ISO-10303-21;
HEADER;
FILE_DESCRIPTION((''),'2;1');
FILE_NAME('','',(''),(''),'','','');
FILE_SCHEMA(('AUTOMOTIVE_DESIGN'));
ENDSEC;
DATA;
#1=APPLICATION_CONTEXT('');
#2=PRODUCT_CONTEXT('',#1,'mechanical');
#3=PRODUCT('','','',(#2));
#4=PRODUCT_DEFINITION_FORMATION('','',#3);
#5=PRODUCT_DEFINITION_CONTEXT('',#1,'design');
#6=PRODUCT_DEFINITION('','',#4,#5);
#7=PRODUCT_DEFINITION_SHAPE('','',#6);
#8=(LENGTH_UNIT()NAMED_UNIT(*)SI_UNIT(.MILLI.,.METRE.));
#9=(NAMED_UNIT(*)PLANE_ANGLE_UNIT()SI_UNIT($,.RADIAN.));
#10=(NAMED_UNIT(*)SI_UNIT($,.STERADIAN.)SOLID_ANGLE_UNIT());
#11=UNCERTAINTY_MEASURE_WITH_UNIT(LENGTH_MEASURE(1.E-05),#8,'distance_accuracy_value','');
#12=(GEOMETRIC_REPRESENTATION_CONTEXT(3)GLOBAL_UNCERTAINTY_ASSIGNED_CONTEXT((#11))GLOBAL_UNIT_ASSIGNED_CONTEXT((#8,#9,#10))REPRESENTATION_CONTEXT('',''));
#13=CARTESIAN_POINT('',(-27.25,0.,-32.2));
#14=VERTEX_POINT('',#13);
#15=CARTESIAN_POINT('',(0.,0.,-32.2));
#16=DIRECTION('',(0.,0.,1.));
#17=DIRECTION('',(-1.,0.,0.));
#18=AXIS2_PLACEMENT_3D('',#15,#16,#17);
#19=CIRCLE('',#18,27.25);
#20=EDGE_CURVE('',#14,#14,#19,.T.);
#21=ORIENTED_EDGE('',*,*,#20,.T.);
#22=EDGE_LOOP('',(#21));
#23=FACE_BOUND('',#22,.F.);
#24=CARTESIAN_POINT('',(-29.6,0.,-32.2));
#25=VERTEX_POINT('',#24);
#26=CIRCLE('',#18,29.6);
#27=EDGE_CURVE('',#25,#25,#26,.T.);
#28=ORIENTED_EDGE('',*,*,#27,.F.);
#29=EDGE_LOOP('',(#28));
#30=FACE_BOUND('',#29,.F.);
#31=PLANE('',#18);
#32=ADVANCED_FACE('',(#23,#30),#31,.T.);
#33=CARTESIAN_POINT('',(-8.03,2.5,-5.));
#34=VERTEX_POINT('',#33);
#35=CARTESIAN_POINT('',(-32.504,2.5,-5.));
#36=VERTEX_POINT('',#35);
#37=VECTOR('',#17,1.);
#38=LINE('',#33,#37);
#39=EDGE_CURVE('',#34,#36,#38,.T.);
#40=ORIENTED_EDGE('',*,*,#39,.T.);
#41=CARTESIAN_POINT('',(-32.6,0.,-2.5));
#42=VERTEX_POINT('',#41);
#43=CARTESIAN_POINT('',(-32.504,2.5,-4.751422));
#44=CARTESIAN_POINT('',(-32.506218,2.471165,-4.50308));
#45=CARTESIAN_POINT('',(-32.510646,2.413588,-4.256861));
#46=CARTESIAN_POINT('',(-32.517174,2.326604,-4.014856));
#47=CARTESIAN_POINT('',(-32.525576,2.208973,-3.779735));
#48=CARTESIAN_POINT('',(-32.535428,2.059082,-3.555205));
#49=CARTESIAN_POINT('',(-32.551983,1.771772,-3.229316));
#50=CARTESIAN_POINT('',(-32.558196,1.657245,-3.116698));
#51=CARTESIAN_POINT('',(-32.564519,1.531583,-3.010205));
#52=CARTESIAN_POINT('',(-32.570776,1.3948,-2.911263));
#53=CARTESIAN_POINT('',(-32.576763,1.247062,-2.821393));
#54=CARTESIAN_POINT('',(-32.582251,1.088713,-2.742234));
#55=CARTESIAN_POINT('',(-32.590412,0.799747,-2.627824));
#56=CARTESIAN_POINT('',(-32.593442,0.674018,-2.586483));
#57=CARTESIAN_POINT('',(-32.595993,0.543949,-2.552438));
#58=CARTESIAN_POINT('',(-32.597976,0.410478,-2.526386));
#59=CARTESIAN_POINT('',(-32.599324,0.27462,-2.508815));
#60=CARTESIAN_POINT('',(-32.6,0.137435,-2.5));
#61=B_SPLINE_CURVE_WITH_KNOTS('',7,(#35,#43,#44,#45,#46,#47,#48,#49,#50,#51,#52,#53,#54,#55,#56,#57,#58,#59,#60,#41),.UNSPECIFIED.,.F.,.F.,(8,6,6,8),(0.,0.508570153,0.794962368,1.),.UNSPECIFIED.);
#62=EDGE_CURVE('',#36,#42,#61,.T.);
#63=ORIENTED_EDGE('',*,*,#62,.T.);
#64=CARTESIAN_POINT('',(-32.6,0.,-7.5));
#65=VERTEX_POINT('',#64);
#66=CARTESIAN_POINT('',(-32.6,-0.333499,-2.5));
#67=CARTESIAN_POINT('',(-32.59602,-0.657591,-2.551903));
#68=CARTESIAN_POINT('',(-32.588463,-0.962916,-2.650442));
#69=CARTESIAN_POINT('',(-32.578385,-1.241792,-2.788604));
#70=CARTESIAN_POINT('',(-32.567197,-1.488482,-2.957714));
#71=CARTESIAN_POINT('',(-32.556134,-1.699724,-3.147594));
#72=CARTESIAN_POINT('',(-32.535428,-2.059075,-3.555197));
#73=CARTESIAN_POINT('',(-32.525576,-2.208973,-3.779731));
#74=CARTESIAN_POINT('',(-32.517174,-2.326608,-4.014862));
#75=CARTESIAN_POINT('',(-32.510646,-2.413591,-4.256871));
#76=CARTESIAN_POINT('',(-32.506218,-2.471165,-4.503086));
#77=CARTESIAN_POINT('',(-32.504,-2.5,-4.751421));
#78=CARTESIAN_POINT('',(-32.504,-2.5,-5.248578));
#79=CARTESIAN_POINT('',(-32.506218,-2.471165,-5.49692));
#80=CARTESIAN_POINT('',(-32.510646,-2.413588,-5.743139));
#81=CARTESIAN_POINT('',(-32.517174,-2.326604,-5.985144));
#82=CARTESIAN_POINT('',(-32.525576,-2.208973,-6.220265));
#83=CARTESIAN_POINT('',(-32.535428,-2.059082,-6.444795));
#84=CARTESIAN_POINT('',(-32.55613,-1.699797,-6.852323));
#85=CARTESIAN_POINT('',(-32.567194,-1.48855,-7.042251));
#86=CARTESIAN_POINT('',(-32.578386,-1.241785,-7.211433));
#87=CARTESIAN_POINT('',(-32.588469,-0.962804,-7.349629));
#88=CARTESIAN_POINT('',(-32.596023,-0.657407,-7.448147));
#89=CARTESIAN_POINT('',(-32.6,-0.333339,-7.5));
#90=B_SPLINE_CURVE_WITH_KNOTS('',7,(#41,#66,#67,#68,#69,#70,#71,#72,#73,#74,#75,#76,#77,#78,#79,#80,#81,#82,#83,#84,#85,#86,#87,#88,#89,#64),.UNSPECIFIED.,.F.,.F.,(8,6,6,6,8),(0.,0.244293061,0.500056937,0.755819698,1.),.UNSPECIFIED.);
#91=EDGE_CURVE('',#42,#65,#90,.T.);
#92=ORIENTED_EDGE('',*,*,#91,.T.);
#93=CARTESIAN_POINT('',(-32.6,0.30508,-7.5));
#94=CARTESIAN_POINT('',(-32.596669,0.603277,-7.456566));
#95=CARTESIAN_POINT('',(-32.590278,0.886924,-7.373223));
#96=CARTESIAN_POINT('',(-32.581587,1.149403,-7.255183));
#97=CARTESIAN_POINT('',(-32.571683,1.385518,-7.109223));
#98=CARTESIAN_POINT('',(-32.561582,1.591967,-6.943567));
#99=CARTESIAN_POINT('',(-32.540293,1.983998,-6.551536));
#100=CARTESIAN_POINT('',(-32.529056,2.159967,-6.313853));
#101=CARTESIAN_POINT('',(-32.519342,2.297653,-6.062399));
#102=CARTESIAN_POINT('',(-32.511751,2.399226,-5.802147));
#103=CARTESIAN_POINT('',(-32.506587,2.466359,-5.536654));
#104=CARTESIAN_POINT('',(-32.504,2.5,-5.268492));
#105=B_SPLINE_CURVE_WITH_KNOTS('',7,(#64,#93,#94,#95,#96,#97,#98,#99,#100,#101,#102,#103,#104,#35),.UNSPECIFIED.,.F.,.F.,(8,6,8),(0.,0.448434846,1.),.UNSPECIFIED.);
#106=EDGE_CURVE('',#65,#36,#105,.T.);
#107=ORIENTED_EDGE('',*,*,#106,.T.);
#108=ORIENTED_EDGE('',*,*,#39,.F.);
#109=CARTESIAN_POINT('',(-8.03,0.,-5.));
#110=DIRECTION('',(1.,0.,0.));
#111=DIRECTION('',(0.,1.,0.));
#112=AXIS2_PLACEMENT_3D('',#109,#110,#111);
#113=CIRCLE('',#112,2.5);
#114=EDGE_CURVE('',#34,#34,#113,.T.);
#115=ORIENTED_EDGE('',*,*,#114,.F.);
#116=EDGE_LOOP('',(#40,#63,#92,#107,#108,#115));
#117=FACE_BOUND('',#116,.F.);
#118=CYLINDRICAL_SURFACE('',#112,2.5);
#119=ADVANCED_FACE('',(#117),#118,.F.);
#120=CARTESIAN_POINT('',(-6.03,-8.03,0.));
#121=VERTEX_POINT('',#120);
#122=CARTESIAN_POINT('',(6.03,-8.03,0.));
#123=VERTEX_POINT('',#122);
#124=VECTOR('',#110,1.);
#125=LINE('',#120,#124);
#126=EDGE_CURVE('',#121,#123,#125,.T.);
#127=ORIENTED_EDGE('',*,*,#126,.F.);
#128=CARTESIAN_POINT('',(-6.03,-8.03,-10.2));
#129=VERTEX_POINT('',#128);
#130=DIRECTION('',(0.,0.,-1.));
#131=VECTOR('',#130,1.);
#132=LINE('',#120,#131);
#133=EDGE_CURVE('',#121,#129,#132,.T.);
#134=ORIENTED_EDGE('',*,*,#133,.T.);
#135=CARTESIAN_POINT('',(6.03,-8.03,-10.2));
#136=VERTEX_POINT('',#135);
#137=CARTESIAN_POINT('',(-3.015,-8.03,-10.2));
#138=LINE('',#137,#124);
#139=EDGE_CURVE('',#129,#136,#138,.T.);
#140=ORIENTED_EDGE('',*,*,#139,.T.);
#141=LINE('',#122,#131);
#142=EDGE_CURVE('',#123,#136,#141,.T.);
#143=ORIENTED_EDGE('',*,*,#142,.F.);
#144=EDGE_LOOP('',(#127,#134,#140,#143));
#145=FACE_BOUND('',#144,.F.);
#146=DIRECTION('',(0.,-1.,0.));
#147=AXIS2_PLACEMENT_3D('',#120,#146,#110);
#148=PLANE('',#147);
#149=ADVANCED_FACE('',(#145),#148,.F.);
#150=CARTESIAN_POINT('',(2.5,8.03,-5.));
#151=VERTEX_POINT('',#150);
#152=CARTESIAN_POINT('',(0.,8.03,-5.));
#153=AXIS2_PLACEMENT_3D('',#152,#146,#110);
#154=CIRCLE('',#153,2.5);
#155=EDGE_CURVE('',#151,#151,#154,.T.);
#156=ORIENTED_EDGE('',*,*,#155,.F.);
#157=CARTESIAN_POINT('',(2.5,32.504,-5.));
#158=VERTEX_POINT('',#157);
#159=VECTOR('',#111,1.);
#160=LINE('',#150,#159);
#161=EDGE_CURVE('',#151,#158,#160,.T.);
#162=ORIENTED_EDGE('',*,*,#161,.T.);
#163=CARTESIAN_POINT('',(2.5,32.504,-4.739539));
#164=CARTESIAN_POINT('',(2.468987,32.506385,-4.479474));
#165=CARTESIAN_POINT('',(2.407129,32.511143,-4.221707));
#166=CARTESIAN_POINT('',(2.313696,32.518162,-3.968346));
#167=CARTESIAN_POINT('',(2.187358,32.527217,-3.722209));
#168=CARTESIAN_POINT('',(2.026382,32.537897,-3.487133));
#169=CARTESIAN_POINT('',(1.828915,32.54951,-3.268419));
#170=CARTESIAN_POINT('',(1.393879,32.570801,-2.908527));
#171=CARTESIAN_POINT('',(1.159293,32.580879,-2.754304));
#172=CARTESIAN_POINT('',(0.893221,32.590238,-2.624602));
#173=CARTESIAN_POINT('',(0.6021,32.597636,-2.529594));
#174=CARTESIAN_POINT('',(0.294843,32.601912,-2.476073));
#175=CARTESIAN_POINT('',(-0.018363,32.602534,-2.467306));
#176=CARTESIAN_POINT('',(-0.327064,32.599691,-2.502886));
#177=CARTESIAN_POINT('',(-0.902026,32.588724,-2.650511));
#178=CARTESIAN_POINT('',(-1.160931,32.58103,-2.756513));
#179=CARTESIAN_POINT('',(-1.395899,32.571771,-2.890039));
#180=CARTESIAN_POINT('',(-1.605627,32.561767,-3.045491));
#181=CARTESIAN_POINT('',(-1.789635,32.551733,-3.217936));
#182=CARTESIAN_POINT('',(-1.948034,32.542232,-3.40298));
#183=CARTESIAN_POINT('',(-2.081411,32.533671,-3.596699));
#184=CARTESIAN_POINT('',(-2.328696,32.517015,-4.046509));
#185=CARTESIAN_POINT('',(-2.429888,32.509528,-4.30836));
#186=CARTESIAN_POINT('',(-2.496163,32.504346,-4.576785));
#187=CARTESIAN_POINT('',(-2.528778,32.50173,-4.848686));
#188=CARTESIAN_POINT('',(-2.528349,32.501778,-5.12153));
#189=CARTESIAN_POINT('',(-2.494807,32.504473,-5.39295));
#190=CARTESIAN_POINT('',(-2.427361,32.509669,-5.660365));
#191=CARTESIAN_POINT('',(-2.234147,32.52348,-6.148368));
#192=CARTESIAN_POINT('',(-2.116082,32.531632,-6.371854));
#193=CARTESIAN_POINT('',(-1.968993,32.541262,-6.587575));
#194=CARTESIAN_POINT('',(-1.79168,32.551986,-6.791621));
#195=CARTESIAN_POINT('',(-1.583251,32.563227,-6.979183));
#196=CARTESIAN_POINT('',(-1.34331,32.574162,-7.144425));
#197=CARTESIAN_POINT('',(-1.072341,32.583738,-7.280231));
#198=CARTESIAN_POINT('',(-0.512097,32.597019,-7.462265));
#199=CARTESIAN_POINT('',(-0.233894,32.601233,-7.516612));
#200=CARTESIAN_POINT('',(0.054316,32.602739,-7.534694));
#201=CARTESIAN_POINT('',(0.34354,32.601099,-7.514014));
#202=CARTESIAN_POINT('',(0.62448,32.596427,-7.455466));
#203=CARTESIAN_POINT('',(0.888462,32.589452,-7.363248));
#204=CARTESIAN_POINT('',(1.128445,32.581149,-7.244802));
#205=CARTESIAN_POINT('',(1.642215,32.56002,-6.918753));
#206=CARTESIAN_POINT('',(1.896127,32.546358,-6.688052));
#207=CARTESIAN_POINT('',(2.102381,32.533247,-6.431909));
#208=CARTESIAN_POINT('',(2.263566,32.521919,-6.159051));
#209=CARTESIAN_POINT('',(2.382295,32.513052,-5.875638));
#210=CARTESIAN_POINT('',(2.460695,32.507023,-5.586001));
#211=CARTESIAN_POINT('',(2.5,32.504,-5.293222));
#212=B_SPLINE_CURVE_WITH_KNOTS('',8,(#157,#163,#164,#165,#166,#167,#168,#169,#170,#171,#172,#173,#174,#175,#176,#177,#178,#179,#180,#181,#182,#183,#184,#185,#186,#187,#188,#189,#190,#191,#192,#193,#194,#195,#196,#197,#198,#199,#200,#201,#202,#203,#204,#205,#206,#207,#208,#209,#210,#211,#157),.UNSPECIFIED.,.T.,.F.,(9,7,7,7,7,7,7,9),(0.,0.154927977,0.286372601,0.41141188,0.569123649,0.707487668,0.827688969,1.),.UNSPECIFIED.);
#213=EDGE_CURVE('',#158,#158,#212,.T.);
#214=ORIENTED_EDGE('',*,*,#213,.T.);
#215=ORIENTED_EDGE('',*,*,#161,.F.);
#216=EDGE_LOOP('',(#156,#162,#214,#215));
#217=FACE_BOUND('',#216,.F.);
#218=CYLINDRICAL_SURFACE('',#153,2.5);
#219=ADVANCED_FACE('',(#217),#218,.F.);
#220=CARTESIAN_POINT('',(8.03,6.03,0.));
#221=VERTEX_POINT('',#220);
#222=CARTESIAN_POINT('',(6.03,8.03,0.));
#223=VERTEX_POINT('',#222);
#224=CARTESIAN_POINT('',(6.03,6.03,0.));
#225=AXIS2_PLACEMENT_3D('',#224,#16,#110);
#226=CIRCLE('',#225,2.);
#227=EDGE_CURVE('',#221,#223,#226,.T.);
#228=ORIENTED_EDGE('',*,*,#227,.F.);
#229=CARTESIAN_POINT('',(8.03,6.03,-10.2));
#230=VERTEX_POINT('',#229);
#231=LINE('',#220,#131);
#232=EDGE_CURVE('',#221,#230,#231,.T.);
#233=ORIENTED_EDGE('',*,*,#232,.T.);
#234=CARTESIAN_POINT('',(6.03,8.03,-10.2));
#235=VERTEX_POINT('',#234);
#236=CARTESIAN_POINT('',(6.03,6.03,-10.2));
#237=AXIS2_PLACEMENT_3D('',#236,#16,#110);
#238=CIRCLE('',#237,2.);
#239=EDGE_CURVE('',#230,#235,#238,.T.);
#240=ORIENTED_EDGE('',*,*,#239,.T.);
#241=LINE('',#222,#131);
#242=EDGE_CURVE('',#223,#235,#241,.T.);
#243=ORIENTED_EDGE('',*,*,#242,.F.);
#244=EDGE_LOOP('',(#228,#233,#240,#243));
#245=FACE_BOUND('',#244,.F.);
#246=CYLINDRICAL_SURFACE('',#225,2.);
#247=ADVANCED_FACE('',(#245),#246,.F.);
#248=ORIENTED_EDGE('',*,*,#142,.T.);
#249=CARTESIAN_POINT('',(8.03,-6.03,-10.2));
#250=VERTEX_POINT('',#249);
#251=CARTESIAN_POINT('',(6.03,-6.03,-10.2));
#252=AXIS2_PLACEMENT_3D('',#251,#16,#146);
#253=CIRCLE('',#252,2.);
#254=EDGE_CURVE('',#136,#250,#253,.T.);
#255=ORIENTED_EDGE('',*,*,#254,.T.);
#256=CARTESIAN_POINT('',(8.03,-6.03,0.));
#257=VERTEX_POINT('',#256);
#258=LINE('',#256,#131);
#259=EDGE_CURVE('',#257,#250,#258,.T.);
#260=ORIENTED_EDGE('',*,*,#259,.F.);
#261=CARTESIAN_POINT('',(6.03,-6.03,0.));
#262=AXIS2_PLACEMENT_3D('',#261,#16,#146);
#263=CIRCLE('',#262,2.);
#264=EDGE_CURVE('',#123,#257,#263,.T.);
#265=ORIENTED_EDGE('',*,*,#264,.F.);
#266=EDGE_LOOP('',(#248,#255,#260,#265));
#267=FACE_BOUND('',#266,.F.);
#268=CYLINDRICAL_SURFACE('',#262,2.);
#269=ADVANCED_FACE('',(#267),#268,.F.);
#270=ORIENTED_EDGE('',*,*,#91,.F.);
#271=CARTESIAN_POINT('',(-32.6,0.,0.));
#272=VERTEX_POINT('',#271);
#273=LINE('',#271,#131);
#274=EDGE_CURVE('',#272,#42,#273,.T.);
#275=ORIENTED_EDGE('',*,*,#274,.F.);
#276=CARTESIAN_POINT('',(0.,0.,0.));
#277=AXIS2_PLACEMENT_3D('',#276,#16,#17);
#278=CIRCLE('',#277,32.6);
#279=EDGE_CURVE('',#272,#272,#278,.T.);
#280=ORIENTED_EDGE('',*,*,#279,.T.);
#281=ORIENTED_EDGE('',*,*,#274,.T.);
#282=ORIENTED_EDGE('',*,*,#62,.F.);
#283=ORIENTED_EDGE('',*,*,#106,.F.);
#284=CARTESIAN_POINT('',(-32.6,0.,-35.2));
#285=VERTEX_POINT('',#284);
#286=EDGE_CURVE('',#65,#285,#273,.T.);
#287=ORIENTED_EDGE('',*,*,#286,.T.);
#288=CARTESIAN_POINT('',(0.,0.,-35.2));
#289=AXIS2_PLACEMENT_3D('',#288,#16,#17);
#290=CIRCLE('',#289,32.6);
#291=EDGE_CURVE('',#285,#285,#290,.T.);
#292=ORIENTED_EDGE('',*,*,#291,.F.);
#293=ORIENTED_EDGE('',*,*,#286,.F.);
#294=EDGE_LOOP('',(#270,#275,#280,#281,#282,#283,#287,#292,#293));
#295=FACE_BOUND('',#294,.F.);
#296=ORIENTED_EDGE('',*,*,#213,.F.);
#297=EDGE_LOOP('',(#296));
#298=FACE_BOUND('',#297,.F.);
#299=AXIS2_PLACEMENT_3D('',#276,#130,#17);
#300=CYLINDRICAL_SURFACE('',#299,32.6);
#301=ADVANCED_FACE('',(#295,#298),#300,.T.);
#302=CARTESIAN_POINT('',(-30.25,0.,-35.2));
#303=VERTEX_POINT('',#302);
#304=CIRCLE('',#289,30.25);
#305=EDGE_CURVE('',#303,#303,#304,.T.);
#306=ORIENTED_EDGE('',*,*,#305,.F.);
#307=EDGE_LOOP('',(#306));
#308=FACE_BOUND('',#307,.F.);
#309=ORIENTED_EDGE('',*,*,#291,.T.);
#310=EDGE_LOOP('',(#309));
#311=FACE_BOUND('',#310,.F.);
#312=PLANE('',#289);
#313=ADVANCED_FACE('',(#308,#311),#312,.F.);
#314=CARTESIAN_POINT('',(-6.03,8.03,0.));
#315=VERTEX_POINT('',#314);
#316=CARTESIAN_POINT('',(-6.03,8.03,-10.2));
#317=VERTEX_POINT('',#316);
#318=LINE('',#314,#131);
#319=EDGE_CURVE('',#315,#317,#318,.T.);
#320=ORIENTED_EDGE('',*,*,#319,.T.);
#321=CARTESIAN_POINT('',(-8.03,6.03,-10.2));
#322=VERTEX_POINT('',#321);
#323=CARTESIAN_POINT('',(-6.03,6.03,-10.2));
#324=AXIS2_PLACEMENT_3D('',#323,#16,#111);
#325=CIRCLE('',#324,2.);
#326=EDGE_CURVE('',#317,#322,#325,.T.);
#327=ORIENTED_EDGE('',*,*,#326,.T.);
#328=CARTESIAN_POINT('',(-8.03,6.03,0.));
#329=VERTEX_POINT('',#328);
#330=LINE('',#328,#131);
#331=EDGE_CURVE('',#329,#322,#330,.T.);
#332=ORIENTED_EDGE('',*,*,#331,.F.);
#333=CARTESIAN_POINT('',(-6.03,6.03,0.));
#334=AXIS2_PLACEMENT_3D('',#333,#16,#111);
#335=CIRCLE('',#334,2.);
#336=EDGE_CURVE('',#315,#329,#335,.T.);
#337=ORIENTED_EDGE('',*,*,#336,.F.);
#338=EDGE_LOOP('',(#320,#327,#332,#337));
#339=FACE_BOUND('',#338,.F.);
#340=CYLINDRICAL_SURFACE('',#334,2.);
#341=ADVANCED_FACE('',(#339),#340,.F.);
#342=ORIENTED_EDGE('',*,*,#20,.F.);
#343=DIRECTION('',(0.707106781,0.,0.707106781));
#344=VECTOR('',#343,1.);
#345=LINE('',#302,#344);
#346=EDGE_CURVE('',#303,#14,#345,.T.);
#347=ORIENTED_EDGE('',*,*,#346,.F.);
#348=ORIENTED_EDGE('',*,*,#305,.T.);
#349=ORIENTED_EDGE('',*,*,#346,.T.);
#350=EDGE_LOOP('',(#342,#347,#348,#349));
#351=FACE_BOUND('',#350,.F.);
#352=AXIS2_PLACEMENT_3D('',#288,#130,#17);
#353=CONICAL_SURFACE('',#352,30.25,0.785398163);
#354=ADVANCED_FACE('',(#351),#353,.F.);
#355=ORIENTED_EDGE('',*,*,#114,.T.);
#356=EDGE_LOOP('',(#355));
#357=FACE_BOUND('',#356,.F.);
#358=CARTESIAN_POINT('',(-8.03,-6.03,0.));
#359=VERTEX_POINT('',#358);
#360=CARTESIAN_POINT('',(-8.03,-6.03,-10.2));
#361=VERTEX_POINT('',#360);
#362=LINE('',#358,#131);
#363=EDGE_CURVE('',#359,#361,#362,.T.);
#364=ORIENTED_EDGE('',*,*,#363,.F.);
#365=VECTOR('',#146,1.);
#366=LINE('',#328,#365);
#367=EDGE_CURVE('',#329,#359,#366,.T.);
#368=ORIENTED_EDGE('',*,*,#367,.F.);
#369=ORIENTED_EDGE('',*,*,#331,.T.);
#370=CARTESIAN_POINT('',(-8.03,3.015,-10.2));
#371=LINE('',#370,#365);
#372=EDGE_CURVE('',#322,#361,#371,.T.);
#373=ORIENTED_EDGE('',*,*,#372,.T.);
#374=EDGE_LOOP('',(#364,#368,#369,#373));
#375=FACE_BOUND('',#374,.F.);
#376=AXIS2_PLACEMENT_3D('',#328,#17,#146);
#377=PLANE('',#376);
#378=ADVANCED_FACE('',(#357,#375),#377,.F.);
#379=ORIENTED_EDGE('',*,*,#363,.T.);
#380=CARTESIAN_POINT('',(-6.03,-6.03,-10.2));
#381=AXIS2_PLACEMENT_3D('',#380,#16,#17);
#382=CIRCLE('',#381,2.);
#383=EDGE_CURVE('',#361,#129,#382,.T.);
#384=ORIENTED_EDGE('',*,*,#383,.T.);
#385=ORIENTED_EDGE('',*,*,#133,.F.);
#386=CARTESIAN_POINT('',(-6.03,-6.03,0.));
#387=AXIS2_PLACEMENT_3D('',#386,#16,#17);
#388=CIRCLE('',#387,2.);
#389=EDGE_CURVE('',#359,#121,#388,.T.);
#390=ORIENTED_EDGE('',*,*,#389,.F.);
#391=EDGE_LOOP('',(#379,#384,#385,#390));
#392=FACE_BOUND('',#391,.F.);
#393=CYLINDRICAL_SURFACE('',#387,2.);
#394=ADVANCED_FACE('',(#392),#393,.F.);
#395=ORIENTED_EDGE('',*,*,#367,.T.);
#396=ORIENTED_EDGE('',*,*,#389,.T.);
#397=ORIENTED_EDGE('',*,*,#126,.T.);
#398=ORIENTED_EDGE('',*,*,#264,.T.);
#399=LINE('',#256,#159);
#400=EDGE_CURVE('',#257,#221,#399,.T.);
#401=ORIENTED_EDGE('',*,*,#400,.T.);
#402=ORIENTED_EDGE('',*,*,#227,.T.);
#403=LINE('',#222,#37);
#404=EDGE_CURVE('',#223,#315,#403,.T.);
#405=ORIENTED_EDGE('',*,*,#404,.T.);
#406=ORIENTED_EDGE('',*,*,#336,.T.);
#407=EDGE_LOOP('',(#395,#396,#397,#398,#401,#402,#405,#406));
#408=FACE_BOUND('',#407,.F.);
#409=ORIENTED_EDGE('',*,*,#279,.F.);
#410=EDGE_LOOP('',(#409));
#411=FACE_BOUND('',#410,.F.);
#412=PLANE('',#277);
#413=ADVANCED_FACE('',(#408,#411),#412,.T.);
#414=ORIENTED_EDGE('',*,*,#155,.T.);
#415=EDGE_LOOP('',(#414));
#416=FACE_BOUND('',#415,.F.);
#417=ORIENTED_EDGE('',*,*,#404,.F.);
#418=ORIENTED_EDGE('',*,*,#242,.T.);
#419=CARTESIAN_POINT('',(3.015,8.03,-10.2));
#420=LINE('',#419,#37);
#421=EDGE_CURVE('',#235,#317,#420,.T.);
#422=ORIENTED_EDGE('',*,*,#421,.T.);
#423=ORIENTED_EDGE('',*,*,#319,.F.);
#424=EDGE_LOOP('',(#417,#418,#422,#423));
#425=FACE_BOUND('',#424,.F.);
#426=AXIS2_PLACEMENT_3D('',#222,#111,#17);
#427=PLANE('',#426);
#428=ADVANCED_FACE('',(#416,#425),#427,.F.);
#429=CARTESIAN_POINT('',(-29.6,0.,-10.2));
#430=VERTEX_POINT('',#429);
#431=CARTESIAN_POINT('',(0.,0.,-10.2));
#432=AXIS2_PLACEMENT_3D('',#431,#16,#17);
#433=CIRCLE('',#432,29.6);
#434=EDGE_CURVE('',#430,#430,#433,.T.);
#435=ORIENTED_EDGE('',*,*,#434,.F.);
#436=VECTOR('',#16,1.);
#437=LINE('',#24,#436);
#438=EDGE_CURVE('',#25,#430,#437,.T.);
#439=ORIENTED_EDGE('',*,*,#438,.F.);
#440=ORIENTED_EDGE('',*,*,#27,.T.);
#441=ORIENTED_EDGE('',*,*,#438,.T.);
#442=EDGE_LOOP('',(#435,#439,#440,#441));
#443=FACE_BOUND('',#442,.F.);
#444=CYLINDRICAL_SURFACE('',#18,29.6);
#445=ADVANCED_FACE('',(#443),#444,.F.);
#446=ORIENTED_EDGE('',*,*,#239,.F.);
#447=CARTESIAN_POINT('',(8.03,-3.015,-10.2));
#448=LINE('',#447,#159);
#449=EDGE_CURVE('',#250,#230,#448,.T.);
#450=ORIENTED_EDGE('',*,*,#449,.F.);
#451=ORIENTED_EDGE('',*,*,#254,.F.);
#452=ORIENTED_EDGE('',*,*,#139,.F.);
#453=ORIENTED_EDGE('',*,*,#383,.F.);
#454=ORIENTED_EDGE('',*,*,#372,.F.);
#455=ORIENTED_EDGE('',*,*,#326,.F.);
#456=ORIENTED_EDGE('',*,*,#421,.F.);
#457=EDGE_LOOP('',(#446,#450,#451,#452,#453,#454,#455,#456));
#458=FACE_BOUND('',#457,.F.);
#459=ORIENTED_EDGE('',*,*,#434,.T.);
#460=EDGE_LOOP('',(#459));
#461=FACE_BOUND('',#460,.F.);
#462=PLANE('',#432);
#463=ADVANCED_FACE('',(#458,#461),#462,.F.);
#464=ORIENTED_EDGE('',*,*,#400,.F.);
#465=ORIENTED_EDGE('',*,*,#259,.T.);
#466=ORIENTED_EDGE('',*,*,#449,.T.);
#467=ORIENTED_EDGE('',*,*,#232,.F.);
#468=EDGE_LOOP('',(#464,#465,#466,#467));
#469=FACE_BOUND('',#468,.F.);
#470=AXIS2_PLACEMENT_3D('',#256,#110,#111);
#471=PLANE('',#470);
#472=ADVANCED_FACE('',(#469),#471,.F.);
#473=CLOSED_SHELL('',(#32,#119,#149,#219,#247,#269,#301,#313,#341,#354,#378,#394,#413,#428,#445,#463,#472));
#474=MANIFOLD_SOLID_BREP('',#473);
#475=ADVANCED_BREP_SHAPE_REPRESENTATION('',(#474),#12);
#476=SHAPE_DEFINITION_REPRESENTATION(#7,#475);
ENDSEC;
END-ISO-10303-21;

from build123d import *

# Parameters (mm, degrees)
F3_DEPTH        = 25
F4_R            = 2.5
F5_DEPTH        = 24.571
F5_COPIES_COUNT = 2
F5_COPIES_ANGLE = 270


# Not quite as in the source:
# - a pattern or mirror of a feature is missing from the dataset's text; its kind, count and spacing are read off the source's solid


with BuildPart() as f1:
    # F0 (on Front) → F1 (revolve)
    with BuildSketch(Plane.XZ):
        Polygon((0, -10.2), (0, 0), (-32.6, 0), (-32.6, -35.2), (-30.25, -35.2), (-27.25, -32.2), (-29.6, -32.2), (-29.6, -10.2), align=None)
    revolve(axis=Axis((0, 0, -5.1), (0, 0, 1)))

    # F2 (on face) → F3 (cut)
    with BuildSketch(Plane.XY):
        with BuildLine():
            ThreePointArc((8.03, 6.03), (7.4442135624, 7.4442135624), (6.03, 8.03))
            Line((6.03, 8.03), (-6.03, 8.03))
            ThreePointArc((-6.03, 8.03), (-7.4442135624, 7.4442135624), (-8.03, 6.03))
            Line((-8.03, 6.03), (-8.03, -6.03))
            ThreePointArc((-8.03, -6.03), (-7.4442135624, -7.4442135624), (-6.03, -8.03))
            Line((-6.03, -8.03), (6.03, -8.03))
            ThreePointArc((6.03, -8.03), (7.4442135624, -7.4442135624), (8.03, -6.03))
            Line((8.03, -6.03), (8.03, 6.03))
        make_face()
    extrude(amount=-F3_DEPTH, mode=Mode.SUBTRACT)

    # F4 (on face) → F5 (cut, through all)
    with BuildSketch(Plane.YZ.offset(-8.03)):
        with Locations((0, -5)):
            Circle(F4_R)
    f5 = extrude(amount=-F5_DEPTH, mode=Mode.SUBTRACT)

    # F5_copies: F5 ×2 about axis
    f5_copies_axis = Axis((0, 0, 0), (0, 0, 1))
    for i in range(1, F5_COPIES_COUNT):
        add(f5.rotate(f5_copies_axis, i * F5_COPIES_ANGLE / (F5_COPIES_COUNT - 1)), mode=Mode.SUBTRACT)


solid = f1.part
